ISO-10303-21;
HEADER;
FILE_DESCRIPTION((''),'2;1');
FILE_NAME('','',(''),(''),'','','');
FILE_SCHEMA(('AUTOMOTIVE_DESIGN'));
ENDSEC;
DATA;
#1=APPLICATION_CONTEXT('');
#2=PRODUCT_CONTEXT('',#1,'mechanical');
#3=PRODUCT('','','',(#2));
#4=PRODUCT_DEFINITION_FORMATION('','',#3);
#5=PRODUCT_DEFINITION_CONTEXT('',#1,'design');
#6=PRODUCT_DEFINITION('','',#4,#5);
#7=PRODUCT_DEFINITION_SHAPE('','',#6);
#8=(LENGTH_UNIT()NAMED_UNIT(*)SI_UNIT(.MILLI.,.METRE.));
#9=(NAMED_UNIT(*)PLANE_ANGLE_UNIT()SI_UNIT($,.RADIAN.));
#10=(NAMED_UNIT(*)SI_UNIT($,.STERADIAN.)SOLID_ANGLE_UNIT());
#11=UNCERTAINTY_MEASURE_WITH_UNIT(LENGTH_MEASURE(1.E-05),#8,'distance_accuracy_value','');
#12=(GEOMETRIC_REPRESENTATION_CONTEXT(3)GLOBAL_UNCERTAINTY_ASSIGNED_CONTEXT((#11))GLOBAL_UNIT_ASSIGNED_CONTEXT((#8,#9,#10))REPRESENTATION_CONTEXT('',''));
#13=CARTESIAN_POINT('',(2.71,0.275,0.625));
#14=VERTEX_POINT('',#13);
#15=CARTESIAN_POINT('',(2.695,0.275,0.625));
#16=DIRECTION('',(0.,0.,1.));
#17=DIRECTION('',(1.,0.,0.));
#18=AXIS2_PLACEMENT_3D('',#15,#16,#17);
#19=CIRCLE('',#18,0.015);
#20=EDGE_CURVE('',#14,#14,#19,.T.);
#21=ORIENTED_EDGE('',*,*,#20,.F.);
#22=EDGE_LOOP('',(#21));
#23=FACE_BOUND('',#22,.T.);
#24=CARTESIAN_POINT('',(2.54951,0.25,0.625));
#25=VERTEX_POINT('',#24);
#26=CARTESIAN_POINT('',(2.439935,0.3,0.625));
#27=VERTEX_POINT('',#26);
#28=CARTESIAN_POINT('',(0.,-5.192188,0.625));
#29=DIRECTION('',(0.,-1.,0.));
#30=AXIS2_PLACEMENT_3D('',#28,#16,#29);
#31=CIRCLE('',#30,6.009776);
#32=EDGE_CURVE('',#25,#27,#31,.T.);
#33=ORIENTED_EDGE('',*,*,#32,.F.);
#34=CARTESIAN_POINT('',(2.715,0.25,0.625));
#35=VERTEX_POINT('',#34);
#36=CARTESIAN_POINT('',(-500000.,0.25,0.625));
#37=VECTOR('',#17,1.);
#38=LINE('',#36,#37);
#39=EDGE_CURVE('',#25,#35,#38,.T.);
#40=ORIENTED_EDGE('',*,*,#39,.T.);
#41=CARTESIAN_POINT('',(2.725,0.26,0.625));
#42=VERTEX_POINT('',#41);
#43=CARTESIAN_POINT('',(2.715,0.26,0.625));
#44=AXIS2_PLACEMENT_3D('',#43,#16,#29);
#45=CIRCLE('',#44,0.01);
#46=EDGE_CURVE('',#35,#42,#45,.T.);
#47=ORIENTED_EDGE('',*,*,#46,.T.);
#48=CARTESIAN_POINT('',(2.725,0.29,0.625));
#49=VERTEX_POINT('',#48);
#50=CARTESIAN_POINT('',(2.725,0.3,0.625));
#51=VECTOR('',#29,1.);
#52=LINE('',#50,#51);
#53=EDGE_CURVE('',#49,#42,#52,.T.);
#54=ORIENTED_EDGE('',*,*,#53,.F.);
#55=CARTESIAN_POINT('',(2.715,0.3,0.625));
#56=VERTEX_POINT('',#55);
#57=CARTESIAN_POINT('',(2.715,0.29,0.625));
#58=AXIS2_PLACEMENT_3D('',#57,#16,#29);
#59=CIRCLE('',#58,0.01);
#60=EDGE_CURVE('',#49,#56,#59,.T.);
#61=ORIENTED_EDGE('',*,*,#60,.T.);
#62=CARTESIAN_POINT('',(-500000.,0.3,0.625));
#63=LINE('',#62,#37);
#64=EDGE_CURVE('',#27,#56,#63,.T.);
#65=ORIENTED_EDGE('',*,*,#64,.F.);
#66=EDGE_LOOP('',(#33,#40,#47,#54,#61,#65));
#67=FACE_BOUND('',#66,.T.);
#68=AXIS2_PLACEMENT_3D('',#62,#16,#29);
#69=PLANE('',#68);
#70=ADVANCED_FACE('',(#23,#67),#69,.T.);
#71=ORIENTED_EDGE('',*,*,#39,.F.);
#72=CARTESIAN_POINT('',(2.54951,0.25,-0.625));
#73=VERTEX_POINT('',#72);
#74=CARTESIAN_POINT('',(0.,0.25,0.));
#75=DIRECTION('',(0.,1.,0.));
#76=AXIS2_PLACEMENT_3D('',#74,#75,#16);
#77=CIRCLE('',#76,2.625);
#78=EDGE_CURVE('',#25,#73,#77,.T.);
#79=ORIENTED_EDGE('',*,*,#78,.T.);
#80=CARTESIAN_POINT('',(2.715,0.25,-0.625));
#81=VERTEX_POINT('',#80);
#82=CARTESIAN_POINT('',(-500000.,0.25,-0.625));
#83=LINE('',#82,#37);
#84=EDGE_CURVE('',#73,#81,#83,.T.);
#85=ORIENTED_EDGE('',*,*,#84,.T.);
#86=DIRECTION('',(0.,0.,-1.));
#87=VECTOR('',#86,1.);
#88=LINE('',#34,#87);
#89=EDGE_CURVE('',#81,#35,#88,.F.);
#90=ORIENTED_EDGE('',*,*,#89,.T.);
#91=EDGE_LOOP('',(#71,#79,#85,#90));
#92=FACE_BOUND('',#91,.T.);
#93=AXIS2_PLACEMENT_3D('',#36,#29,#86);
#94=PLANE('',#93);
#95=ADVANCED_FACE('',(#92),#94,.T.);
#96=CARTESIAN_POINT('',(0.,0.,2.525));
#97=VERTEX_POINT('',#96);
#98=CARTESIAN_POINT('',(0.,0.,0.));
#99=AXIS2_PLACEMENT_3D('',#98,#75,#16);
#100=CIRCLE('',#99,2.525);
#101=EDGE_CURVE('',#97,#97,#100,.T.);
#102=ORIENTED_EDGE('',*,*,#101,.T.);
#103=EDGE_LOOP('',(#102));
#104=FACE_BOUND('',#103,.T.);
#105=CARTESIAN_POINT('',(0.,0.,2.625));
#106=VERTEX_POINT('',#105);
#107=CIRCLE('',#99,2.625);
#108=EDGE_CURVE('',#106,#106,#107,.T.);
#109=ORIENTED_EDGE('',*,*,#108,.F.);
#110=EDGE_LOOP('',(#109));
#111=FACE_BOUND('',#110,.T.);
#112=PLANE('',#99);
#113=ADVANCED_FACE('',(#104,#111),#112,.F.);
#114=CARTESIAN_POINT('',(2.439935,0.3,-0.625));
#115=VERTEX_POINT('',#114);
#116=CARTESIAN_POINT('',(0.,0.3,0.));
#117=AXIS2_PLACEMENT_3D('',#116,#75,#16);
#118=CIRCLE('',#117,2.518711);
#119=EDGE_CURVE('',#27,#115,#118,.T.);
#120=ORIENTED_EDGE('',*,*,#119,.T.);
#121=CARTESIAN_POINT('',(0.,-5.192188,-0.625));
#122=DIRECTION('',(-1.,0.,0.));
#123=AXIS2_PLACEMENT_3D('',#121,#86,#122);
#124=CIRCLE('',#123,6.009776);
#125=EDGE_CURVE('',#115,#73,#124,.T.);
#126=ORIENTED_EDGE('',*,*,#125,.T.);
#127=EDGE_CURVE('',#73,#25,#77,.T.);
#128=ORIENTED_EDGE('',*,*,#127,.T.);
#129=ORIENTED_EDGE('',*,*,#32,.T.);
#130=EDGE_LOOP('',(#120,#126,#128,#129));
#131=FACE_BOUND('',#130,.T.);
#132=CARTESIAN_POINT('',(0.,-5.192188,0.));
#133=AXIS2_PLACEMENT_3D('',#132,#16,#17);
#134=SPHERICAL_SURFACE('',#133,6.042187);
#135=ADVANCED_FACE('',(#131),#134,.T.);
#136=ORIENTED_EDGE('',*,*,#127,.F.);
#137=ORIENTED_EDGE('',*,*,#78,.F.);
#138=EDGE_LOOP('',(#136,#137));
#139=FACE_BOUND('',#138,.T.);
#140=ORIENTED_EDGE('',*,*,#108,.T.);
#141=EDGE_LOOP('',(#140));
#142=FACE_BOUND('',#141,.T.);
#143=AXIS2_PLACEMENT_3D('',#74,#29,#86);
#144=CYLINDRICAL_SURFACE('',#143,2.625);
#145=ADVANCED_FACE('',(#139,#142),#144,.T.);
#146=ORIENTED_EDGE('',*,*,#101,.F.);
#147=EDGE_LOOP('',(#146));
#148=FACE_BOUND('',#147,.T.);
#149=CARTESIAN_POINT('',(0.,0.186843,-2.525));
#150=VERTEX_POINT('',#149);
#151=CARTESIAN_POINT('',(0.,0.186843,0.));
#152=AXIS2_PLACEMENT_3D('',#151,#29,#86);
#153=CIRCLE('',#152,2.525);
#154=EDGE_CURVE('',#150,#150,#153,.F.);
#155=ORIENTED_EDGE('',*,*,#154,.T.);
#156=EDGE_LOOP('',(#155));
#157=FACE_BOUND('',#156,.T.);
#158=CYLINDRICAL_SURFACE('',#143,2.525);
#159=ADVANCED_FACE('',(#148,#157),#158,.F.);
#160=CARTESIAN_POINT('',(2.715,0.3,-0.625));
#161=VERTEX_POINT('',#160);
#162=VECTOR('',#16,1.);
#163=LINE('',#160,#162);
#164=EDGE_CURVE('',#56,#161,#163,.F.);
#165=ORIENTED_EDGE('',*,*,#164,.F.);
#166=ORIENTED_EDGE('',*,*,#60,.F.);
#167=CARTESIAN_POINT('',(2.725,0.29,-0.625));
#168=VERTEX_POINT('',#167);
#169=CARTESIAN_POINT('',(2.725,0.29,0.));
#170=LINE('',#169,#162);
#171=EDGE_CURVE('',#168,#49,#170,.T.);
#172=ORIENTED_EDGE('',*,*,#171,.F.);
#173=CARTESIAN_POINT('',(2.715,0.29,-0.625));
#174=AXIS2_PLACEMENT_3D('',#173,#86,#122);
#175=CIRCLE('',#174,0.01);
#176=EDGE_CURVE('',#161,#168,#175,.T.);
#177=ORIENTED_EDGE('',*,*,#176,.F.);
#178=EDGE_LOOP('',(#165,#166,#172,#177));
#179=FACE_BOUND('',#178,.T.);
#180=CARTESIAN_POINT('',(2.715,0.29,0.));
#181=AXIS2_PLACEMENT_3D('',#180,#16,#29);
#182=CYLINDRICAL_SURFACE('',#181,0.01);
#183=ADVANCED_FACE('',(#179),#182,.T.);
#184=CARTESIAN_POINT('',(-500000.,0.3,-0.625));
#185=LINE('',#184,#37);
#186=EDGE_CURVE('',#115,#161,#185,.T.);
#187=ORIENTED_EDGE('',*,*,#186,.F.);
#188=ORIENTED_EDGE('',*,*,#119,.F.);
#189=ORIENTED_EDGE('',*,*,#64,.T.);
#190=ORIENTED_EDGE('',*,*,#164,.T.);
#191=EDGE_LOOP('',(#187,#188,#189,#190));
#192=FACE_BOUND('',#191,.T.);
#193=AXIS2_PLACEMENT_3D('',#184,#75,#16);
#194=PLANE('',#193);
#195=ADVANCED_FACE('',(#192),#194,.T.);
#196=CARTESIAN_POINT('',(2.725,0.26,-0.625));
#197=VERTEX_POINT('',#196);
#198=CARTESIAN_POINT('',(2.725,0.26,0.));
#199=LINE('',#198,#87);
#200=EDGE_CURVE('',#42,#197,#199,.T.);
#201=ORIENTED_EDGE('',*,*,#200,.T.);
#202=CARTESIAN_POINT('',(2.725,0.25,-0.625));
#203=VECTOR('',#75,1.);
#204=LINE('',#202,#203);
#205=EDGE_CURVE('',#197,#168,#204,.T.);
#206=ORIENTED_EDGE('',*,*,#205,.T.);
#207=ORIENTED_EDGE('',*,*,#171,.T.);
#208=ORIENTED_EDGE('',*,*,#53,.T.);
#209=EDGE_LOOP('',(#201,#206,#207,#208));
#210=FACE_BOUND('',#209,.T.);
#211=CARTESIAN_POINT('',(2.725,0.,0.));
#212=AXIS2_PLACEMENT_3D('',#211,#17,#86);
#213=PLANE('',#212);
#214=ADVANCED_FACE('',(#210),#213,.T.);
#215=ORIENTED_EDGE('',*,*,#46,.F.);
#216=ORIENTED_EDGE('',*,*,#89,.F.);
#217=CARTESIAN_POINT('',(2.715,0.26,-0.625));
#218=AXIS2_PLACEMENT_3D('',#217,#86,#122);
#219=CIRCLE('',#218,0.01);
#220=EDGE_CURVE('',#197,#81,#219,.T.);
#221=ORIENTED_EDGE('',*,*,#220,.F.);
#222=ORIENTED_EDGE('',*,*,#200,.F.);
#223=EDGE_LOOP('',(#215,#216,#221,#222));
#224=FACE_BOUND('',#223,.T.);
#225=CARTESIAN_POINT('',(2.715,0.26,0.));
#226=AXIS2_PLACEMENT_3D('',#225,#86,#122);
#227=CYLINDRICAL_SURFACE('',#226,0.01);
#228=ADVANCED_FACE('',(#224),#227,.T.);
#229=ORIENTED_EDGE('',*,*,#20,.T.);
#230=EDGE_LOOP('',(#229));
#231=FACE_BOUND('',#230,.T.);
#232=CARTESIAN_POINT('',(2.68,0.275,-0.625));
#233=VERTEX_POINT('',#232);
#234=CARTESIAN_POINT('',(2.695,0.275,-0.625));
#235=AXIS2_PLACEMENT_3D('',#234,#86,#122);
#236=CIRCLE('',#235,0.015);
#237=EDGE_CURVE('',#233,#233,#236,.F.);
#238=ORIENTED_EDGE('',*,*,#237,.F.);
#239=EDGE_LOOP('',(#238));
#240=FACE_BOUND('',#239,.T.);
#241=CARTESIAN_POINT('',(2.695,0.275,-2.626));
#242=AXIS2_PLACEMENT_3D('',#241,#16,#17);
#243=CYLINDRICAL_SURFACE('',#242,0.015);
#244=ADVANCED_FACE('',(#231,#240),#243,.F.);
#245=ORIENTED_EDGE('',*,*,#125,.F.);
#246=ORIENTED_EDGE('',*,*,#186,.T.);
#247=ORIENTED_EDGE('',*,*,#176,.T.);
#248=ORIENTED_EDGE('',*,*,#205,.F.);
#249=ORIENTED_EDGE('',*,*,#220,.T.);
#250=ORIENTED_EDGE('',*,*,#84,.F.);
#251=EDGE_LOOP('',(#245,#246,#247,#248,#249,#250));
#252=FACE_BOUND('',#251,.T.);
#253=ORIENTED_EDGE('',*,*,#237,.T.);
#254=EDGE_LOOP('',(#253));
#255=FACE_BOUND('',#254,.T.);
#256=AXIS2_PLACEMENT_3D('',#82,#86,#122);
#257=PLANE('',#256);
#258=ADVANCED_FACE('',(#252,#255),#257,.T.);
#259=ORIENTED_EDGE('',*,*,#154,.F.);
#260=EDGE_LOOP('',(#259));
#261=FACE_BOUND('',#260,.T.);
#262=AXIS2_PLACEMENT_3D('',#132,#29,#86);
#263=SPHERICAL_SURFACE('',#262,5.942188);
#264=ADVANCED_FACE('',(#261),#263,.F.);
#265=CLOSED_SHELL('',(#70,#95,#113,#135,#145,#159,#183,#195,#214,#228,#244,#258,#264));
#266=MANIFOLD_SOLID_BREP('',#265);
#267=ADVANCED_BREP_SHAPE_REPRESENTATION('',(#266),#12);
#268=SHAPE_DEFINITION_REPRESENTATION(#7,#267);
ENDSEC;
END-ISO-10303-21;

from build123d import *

# Parameters (mm, degrees)
SKETCH1_R                       = 2.625
BOSS_EXTRUDE1_DEPTH             = 0.25
DOME1_FACE_RADIUS               = 2.625
DOME1_HEIGHT                    = 0.6
SKETCH2_W                       = 1.25
SKETCH2_H                       = 0.05
BOSS_EXTRUDE2_DEPTH             = 0.1
BOSS_EXTRUDE2_DIRECTION_2_REACH = 7.931
FILLET1_R                       = 0.01
CUT_EXTRUDE1_REACH              = 6.326
SKETCH3_R                       = 0.015


# Read off the part's stored shape, not the designer's step: Shell1
with BuildPart() as part:
    # Sketch1 → Boss-Extrude1 (new body)
    with BuildSketch(Plane(origin=(0, 0, 0), x_dir=(1, 0, 0), z_dir=(0, 1, 0))):
        with Locations(Location((0, 0, 0), (0, 0, 270))):
            Circle(SKETCH1_R)
    extrude(amount=BOSS_EXTRUDE1_DEPTH)

    # Dome1: a dome of height H over a round flat face of radius A is a cap of a sphere of radius (A * A + H * H) / (2 * H)
    dome1_r = (DOME1_FACE_RADIUS * DOME1_FACE_RADIUS + DOME1_HEIGHT * DOME1_HEIGHT) / (2 * DOME1_HEIGHT)
    dome1_base = Plane((0, 0.25, 0), z_dir=(0, 1, 0))
    with Locations(dome1_base.offset(DOME1_HEIGHT - dome1_r)):
        dome1_ball = Sphere(dome1_r, mode=Mode.PRIVATE)
    add(split(dome1_ball, bisect_by=dome1_base, keep=Keep.TOP, mode=Mode.PRIVATE))

    # Shell1 outline → Shell1 (revolve, cut)
    with BuildSketch(Plane.XY):
        with BuildLine():
            Line((2.525, 0), (2.525000005, 0.186842827))
            ThreePointArc((2.525000005, 0.186842827), (1.293519523, 0.607502106), (0, 0.75))
            Line((0, 0.75), (0, 0))
            Line((0, 0), (2.525, 0))
        make_face()
    revolve(axis=Axis((0, 0, 0), (0, 1, 0)), mode=Mode.SUBTRACT)

    # Sketch2 → Boss-Extrude2 (add)
    with BuildSketch(Plane(origin=(2.625, 0, 0), x_dir=(0, 0, -1), z_dir=(1, 0, 0))):
        with Locations((0, 0.275)):
            Rectangle(SKETCH2_W, SKETCH2_H)
    extrude(amount=BOSS_EXTRUDE2_DEPTH)

    # Sketch2 → Boss-Extrude2 direction 2 (add, up to next)
    with BuildSketch(Plane(origin=(2.625, 0, 0), x_dir=(0, 0, -1), z_dir=(1, 0, 0)), mode=Mode.PRIVATE) as boss_extrude2_direction_2_sk1:
        with Locations((0, 0.275)):
            Rectangle(SKETCH2_W, SKETCH2_H)
    boss_extrude2_direction_2_tool1 = extrude(boss_extrude2_direction_2_sk1.sketch, amount=-BOSS_EXTRUDE2_DIRECTION_2_REACH, mode=Mode.PRIVATE) - part.part
    add(boss_extrude2_direction_2_tool1.solids().sort_by_distance((2.625, 0.275, 0))[0])

    # Fillet1
    fillet1_edges = [part.edges().sort_by_distance(p)[0] for p in [
        (2.725, 0.25, 0),
        (2.725, 0.3, 0),
    ]]
    fillet(fillet1_edges, radius=FILLET1_R)

    # Sketch3 → Cut-Extrude1 (cut, up to next)
    with BuildSketch(Plane.XY.offset(0.625), mode=Mode.PRIVATE) as cut_extrude1_sk1:
        with Locations((2.695, 0.275)):
            Circle(SKETCH3_R)
    cut_extrude1_tool1 = extrude(cut_extrude1_sk1.sketch, amount=-CUT_EXTRUDE1_REACH, mode=Mode.PRIVATE) & part.part
    add(cut_extrude1_tool1.solids().sort_by_distance((2.695, 0.275, 0.625))[0], mode=Mode.SUBTRACT)


solid = part.part
